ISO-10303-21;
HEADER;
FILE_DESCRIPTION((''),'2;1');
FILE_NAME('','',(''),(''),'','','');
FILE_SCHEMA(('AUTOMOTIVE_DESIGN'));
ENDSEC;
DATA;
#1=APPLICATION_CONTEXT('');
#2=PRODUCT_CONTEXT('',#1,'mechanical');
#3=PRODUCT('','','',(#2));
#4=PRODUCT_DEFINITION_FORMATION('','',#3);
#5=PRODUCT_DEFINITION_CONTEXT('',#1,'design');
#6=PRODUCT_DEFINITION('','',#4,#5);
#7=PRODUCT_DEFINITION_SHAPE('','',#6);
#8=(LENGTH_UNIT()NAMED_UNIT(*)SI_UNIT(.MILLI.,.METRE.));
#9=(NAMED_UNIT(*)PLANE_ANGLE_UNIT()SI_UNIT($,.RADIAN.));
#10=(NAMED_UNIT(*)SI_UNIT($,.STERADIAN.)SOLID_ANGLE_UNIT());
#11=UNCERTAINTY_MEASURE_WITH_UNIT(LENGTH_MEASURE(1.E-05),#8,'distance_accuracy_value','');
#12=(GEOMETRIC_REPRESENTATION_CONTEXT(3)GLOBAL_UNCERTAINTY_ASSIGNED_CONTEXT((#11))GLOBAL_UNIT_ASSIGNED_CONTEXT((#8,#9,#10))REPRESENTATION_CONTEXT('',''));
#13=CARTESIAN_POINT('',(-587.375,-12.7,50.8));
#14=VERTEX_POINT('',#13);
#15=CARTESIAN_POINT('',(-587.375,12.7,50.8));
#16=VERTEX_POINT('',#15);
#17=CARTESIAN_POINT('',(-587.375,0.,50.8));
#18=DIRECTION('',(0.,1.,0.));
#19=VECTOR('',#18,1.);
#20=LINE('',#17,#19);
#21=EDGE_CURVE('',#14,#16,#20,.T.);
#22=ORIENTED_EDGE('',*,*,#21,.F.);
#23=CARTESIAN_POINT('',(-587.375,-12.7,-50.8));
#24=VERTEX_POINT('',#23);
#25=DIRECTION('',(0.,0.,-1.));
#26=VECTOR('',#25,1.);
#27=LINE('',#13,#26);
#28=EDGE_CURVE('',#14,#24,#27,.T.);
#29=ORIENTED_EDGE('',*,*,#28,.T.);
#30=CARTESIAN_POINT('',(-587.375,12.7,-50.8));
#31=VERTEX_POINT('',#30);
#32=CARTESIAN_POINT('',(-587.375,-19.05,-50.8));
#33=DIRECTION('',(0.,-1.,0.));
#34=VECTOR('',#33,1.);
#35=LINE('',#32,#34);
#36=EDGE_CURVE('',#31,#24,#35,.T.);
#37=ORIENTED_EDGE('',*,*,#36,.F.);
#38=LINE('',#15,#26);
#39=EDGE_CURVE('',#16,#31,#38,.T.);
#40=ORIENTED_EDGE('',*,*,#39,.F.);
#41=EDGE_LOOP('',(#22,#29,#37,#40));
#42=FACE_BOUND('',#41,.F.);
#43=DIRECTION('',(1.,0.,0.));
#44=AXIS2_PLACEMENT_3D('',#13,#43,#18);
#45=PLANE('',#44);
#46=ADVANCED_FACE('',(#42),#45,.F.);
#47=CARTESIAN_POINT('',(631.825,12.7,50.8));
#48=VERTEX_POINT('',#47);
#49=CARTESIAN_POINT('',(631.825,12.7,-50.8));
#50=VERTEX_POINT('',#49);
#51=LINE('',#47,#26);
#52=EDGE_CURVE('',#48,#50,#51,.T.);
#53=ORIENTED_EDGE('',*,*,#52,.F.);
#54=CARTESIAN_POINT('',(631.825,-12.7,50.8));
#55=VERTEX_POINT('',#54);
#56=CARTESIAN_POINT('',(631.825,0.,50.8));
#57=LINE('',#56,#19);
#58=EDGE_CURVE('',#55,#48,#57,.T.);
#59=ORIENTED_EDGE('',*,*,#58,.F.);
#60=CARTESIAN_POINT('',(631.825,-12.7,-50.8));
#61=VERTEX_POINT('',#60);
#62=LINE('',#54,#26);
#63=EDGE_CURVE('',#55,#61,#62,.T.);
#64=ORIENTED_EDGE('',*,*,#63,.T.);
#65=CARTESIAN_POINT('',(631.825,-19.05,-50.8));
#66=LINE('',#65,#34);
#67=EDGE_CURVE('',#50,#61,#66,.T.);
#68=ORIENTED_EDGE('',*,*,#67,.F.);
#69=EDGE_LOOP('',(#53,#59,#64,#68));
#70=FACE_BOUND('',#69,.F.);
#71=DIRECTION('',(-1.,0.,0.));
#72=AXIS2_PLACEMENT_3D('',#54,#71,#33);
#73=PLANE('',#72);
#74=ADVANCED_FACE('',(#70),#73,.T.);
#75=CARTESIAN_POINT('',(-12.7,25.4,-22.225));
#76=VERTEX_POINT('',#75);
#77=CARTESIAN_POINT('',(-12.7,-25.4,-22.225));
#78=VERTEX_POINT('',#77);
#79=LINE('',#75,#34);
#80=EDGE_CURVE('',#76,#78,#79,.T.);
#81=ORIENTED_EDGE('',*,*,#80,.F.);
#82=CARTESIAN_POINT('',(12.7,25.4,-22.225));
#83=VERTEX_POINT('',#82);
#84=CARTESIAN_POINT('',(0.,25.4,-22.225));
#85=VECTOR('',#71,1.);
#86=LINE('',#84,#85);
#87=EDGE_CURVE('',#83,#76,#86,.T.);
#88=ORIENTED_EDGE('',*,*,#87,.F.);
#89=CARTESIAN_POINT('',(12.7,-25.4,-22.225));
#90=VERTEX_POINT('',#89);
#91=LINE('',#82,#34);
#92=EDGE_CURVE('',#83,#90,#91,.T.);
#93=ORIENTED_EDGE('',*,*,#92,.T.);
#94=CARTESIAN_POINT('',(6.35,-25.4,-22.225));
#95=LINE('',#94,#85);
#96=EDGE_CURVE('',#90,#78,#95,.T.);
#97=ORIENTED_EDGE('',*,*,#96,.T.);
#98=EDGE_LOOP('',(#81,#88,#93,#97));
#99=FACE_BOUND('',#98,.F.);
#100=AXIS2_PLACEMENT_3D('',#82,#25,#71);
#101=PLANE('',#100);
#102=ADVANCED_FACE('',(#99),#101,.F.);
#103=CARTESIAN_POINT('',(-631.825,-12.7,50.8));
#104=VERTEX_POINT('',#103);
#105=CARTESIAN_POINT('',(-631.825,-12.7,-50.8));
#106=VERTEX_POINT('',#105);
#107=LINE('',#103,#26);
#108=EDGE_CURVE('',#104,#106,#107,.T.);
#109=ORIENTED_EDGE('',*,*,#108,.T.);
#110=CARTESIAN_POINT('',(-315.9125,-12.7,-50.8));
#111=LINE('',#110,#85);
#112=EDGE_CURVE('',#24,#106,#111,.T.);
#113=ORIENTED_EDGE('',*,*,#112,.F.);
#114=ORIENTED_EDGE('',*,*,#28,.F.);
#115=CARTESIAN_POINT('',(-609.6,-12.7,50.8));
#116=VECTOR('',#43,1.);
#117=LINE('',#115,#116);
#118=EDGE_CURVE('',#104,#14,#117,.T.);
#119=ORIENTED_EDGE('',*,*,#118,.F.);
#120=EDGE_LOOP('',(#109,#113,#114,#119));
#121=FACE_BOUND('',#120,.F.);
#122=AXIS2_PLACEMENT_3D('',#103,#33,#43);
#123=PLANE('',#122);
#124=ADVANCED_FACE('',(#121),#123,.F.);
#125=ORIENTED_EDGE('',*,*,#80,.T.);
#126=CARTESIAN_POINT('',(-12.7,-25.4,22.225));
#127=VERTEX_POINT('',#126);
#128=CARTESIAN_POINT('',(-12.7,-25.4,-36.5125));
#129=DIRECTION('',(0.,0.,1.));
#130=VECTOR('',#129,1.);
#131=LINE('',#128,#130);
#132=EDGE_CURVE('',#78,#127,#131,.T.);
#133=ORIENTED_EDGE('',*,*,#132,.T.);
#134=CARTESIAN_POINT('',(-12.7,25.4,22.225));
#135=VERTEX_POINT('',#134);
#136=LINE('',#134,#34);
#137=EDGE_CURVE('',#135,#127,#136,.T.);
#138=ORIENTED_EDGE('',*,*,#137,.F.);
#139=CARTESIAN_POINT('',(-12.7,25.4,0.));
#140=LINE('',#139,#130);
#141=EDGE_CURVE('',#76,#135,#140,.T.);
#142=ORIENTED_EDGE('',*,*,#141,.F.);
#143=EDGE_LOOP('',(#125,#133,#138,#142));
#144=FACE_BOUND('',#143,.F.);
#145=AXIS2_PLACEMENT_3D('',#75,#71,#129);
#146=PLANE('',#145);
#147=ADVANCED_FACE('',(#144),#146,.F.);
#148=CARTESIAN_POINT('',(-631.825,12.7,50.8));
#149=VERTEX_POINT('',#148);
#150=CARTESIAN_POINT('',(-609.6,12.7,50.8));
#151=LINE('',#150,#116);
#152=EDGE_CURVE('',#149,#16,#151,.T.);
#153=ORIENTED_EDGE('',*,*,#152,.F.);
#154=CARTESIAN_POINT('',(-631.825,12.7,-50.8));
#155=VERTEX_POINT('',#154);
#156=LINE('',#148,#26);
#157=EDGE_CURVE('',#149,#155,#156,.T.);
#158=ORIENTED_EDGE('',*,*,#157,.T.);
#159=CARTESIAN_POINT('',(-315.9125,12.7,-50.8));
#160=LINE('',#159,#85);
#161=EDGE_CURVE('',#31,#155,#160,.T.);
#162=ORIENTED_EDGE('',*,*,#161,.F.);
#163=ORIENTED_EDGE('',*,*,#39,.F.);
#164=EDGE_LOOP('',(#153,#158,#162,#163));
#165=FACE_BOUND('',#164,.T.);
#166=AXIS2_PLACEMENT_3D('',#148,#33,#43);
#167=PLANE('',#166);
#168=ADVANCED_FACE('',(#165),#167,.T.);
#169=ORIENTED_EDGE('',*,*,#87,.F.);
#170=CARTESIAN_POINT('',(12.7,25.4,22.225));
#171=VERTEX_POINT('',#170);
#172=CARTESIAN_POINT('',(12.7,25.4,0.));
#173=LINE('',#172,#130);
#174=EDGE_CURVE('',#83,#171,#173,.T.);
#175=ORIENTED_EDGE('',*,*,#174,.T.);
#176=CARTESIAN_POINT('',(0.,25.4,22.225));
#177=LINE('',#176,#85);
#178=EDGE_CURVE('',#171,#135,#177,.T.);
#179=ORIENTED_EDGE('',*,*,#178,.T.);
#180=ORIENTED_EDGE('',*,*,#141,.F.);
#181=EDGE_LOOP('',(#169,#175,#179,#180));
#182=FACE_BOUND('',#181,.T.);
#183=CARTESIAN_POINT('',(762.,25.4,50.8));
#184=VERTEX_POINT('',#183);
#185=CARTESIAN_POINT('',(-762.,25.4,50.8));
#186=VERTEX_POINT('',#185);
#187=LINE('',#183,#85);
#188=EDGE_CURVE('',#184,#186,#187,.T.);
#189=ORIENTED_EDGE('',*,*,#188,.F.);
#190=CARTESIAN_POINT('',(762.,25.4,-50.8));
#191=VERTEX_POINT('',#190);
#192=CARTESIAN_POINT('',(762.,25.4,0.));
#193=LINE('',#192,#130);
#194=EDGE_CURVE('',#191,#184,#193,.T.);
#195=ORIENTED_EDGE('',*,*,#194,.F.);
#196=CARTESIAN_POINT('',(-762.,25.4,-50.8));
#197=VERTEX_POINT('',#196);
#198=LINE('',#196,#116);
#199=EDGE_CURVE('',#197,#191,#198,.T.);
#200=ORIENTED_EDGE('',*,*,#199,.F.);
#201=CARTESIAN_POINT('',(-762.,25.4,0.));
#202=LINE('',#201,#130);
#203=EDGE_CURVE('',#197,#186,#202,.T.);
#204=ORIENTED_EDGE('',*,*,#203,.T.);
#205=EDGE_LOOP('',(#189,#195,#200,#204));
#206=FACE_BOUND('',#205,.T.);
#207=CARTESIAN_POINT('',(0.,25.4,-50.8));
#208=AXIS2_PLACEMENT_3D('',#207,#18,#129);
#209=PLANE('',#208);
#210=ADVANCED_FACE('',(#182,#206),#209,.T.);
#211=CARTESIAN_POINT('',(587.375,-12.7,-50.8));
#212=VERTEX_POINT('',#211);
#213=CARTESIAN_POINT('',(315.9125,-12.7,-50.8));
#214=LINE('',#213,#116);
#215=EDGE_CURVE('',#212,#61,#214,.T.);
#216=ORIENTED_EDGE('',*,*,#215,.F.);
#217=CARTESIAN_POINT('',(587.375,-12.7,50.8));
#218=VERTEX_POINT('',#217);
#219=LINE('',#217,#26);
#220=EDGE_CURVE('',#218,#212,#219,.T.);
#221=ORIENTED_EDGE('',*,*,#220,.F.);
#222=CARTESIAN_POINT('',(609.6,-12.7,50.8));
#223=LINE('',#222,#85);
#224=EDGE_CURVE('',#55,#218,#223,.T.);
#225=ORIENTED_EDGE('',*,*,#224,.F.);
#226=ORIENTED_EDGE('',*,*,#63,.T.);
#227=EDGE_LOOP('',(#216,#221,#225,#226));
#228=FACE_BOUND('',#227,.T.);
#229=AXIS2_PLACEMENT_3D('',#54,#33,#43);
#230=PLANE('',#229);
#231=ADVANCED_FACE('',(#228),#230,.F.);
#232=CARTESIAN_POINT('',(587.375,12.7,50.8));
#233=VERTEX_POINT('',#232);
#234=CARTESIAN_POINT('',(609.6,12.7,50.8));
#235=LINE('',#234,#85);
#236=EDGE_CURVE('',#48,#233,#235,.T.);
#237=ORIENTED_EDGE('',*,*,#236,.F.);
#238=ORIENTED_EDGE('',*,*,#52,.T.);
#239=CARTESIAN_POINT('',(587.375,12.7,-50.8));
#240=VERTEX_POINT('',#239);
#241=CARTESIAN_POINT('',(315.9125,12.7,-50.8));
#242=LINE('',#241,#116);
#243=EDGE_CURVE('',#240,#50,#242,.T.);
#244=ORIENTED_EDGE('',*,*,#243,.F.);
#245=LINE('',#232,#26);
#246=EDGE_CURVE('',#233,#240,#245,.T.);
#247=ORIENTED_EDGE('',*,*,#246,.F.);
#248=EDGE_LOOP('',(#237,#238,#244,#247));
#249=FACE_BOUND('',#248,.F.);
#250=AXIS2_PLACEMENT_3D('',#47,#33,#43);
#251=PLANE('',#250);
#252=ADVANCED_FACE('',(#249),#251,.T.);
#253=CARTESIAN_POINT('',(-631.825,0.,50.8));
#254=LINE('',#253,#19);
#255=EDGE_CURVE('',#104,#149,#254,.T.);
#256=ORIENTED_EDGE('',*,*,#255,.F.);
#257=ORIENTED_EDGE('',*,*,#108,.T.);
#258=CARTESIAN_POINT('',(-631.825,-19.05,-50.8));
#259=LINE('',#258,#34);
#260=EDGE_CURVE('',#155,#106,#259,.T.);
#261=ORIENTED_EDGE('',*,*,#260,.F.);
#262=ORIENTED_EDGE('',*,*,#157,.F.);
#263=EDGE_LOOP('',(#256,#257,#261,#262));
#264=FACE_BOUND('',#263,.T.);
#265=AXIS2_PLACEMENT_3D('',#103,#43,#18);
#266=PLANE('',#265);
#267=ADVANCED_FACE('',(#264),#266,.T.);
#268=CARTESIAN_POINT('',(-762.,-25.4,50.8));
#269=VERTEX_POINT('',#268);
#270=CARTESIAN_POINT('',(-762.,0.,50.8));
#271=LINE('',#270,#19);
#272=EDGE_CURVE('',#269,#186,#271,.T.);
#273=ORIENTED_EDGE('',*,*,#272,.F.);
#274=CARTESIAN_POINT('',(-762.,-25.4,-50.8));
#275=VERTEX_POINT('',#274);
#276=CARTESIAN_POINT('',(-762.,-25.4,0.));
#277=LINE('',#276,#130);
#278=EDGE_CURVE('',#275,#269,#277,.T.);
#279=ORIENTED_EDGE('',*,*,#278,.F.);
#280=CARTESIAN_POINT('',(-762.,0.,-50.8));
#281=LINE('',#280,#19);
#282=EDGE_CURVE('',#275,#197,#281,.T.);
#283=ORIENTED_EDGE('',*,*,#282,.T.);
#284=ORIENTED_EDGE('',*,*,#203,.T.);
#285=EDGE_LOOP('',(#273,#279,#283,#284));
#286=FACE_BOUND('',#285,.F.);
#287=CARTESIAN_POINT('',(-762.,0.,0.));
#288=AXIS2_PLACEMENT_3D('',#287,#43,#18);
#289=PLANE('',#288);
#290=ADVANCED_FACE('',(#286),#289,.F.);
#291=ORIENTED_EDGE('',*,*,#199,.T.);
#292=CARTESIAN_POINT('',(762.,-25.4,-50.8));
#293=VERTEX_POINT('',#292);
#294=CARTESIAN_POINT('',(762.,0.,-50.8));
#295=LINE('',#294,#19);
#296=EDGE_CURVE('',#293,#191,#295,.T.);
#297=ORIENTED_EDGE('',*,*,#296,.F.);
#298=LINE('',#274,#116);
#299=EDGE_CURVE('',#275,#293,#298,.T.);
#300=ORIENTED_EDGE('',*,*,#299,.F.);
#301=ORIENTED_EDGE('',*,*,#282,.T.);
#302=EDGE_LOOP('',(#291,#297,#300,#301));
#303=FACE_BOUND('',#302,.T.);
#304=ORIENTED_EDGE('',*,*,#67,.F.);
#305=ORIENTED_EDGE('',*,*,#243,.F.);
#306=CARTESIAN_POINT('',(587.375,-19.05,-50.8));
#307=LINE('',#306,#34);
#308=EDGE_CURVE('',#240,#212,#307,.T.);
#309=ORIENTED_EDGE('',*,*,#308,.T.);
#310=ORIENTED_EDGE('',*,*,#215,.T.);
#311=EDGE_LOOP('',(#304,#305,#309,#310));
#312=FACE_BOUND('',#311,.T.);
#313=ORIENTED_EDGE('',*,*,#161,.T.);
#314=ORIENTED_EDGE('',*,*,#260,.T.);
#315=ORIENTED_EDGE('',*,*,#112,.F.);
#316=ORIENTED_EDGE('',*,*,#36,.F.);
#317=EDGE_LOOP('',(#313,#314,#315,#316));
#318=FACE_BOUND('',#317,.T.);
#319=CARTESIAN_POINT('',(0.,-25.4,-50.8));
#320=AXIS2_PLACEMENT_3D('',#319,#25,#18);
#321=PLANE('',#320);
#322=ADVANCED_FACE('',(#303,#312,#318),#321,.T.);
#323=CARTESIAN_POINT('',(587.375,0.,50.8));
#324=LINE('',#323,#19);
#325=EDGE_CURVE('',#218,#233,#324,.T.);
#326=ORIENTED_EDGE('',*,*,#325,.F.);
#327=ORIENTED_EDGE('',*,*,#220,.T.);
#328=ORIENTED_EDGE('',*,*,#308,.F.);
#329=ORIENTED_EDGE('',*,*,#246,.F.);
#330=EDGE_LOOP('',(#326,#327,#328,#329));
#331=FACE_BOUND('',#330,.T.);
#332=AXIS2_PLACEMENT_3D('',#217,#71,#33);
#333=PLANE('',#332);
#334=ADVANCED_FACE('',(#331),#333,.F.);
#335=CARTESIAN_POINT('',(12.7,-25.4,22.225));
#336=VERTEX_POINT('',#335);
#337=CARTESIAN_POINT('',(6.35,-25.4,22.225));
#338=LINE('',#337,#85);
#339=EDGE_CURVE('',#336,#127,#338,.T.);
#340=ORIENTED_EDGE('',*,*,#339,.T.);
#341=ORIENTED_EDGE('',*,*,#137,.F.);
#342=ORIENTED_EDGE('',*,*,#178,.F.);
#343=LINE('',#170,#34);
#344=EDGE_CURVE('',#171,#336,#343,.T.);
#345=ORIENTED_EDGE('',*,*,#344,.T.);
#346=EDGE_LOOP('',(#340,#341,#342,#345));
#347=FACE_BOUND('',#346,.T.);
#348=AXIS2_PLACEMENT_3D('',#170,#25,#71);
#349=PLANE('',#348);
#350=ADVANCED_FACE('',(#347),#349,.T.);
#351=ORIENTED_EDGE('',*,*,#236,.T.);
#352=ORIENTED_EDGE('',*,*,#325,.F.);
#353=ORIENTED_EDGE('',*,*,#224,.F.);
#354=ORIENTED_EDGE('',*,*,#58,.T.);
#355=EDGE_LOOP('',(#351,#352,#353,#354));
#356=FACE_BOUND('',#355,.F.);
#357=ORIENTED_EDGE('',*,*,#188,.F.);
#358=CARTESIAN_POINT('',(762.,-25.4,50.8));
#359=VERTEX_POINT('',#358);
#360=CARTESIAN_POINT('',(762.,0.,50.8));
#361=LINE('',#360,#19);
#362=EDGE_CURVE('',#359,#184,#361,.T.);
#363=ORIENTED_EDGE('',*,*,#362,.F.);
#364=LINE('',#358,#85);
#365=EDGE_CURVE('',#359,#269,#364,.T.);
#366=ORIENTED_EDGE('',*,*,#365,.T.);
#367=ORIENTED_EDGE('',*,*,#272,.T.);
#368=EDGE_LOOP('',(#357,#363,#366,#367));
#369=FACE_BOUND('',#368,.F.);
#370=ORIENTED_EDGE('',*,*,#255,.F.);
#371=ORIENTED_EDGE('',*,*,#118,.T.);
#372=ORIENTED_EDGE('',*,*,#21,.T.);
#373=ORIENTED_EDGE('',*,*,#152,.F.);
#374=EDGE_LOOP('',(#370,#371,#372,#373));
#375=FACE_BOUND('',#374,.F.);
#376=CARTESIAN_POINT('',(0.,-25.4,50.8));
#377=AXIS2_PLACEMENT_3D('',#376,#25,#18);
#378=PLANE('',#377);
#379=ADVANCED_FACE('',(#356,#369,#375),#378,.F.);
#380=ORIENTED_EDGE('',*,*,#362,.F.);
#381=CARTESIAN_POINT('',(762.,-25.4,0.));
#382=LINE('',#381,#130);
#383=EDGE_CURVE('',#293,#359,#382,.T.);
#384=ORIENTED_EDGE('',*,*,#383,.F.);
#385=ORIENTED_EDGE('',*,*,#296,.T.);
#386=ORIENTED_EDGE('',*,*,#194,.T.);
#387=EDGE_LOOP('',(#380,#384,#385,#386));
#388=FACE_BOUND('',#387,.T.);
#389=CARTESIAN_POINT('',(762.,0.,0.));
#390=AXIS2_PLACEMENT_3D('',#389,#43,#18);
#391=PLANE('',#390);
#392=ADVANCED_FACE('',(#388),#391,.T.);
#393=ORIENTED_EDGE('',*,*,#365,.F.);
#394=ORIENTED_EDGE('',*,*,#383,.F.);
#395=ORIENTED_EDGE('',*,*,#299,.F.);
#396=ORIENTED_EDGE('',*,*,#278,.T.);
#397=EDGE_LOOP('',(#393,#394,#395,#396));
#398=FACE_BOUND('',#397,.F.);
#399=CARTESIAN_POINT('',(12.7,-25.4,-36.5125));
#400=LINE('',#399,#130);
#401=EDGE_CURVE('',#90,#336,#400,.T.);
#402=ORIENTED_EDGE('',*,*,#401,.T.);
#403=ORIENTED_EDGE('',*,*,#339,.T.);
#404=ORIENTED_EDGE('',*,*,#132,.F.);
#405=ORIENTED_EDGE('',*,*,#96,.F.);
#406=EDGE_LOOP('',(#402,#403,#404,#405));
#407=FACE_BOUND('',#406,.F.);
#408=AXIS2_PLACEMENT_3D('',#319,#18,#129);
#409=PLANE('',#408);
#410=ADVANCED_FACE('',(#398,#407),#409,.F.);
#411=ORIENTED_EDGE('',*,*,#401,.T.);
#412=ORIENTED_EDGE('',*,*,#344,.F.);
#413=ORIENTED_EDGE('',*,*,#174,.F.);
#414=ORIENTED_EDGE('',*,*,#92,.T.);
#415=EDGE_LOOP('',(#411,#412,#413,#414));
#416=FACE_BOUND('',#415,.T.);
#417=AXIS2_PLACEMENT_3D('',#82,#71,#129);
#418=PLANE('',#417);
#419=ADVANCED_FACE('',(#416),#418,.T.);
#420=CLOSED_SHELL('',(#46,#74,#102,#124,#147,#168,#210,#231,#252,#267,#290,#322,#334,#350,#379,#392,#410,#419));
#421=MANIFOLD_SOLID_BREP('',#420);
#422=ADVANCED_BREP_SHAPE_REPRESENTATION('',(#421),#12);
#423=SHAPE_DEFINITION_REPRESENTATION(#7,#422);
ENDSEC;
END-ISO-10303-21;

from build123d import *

# Parameters (mm, degrees)
F0_W     = 50.8
F0_H     = 101.6
F1_DEPTH = 762
F2_W     = 25.4
F2_H     = 44.45
F3_DEPTH = 50.801
F4_W     = 44.45
F4_H     = 25.4
F5_DEPTH = 101.601


# Not quite as in the source:
# - a pattern or mirror of a feature is missing from the dataset's text; its kind, count and spacing are read off the source's solid


with BuildPart() as f1:
    # F0 (on Right) → F1 (new body, symmetric)
    with BuildSketch(Plane.YZ):
        Rectangle(F0_W, F0_H)
    extrude(amount=F1_DEPTH, both=True)

    # F2 (on face) → F3 (cut, through all)
    with BuildSketch(Plane(origin=(0, 25.4, 0), x_dir=(-1, 0, 0), z_dir=(0, 1, 0))):
        Rectangle(F2_W, F2_H)
    extrude(amount=-F3_DEPTH, mode=Mode.SUBTRACT)

    # F4 (on face) → F5 (cut, through all)
    with BuildSketch(Plane.XY.offset(50.8)):
        with Locations((-609.6, 0)):
            Rectangle(F4_W, F4_H)
    f5 = extrude(amount=-F5_DEPTH, mode=Mode.SUBTRACT)

    # F5_copies: F5 across plane
    add(f5.mirror(Plane(origin=(0, 0, 0), x_dir=(0, 0, 1), z_dir=(1, 0, 0))), mode=Mode.SUBTRACT)


solid = f1.part
